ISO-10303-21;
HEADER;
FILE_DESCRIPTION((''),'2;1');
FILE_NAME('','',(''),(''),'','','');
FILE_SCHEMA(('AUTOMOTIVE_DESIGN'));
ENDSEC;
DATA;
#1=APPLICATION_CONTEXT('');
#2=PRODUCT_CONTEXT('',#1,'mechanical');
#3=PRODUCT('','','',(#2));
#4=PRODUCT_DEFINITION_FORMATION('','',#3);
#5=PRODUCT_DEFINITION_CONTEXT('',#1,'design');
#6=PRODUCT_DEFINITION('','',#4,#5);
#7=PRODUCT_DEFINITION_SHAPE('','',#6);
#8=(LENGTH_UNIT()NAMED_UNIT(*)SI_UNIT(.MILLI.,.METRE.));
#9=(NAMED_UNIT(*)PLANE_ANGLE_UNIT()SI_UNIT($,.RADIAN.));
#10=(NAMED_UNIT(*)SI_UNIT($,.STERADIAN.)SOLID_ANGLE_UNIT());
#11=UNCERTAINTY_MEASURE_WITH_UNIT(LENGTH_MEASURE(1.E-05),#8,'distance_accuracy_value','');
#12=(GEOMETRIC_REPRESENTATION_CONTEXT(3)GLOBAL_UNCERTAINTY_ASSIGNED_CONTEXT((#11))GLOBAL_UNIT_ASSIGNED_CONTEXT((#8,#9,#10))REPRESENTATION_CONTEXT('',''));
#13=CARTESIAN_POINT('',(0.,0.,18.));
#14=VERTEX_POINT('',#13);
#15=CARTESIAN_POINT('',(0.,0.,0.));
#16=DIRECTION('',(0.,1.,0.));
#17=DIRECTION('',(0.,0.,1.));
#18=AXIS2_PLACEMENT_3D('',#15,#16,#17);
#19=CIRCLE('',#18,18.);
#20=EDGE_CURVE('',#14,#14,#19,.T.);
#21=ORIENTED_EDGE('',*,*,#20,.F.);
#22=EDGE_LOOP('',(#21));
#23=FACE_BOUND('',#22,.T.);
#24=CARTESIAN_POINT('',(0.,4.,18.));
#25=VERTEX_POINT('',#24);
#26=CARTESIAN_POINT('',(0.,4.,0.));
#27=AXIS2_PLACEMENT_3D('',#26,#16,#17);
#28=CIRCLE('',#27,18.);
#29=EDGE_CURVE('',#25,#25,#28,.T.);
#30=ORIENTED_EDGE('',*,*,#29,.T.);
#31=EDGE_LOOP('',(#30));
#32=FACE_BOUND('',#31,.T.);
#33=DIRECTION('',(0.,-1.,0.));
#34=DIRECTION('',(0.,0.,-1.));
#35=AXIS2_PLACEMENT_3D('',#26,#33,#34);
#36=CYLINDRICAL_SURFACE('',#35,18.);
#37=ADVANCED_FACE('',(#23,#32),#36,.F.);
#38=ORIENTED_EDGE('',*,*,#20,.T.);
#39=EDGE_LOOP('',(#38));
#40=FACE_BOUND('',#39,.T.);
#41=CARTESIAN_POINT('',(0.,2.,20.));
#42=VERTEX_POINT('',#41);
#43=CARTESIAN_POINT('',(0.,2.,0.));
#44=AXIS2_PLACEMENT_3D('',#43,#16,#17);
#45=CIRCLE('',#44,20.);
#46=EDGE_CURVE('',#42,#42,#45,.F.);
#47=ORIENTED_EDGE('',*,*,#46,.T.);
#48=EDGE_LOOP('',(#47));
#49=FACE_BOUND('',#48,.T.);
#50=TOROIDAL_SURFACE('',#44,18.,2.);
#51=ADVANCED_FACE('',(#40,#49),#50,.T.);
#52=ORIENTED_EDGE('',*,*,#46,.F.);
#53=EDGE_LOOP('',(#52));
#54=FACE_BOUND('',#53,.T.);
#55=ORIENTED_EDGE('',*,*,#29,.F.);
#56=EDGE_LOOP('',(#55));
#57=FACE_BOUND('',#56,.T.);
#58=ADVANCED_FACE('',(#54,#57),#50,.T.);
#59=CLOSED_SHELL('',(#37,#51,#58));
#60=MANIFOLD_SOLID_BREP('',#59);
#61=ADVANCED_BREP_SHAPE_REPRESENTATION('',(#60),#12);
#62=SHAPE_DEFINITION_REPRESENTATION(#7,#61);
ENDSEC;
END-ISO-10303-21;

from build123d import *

# Parameters (mm, degrees)
ESQUISSE1_R      = 20
ESQUISSE1_R_2    = 18
EXTRUSION1_DEPTH = 4
CONG_1_R         = 2


with BuildPart() as part:
    # Esquisse1 → Extrusion1 (new body)
    with BuildSketch(Plane(origin=(0, 0, 0), x_dir=(1, 0, 0), z_dir=(0, 1, 0))):
        with Locations(Location((0, 0, 0), (0, 0, 270))):
            Circle(ESQUISSE1_R)
        with Locations(Location((0, 0, 0), (0, 0, 270))):
            Circle(ESQUISSE1_R_2, mode=Mode.SUBTRACT)
    extrude(amount=EXTRUSION1_DEPTH)

    # Congé1
    cong_1_edges = [part.edges().sort_by_distance(p)[0] for p in [
        (0, 0, -20),
        (0, 4, -20),
    ]]
    fillet(cong_1_edges, radius=CONG_1_R - 0.0001)  # a hair under: the kernel refuses the full size


solid = part.part
